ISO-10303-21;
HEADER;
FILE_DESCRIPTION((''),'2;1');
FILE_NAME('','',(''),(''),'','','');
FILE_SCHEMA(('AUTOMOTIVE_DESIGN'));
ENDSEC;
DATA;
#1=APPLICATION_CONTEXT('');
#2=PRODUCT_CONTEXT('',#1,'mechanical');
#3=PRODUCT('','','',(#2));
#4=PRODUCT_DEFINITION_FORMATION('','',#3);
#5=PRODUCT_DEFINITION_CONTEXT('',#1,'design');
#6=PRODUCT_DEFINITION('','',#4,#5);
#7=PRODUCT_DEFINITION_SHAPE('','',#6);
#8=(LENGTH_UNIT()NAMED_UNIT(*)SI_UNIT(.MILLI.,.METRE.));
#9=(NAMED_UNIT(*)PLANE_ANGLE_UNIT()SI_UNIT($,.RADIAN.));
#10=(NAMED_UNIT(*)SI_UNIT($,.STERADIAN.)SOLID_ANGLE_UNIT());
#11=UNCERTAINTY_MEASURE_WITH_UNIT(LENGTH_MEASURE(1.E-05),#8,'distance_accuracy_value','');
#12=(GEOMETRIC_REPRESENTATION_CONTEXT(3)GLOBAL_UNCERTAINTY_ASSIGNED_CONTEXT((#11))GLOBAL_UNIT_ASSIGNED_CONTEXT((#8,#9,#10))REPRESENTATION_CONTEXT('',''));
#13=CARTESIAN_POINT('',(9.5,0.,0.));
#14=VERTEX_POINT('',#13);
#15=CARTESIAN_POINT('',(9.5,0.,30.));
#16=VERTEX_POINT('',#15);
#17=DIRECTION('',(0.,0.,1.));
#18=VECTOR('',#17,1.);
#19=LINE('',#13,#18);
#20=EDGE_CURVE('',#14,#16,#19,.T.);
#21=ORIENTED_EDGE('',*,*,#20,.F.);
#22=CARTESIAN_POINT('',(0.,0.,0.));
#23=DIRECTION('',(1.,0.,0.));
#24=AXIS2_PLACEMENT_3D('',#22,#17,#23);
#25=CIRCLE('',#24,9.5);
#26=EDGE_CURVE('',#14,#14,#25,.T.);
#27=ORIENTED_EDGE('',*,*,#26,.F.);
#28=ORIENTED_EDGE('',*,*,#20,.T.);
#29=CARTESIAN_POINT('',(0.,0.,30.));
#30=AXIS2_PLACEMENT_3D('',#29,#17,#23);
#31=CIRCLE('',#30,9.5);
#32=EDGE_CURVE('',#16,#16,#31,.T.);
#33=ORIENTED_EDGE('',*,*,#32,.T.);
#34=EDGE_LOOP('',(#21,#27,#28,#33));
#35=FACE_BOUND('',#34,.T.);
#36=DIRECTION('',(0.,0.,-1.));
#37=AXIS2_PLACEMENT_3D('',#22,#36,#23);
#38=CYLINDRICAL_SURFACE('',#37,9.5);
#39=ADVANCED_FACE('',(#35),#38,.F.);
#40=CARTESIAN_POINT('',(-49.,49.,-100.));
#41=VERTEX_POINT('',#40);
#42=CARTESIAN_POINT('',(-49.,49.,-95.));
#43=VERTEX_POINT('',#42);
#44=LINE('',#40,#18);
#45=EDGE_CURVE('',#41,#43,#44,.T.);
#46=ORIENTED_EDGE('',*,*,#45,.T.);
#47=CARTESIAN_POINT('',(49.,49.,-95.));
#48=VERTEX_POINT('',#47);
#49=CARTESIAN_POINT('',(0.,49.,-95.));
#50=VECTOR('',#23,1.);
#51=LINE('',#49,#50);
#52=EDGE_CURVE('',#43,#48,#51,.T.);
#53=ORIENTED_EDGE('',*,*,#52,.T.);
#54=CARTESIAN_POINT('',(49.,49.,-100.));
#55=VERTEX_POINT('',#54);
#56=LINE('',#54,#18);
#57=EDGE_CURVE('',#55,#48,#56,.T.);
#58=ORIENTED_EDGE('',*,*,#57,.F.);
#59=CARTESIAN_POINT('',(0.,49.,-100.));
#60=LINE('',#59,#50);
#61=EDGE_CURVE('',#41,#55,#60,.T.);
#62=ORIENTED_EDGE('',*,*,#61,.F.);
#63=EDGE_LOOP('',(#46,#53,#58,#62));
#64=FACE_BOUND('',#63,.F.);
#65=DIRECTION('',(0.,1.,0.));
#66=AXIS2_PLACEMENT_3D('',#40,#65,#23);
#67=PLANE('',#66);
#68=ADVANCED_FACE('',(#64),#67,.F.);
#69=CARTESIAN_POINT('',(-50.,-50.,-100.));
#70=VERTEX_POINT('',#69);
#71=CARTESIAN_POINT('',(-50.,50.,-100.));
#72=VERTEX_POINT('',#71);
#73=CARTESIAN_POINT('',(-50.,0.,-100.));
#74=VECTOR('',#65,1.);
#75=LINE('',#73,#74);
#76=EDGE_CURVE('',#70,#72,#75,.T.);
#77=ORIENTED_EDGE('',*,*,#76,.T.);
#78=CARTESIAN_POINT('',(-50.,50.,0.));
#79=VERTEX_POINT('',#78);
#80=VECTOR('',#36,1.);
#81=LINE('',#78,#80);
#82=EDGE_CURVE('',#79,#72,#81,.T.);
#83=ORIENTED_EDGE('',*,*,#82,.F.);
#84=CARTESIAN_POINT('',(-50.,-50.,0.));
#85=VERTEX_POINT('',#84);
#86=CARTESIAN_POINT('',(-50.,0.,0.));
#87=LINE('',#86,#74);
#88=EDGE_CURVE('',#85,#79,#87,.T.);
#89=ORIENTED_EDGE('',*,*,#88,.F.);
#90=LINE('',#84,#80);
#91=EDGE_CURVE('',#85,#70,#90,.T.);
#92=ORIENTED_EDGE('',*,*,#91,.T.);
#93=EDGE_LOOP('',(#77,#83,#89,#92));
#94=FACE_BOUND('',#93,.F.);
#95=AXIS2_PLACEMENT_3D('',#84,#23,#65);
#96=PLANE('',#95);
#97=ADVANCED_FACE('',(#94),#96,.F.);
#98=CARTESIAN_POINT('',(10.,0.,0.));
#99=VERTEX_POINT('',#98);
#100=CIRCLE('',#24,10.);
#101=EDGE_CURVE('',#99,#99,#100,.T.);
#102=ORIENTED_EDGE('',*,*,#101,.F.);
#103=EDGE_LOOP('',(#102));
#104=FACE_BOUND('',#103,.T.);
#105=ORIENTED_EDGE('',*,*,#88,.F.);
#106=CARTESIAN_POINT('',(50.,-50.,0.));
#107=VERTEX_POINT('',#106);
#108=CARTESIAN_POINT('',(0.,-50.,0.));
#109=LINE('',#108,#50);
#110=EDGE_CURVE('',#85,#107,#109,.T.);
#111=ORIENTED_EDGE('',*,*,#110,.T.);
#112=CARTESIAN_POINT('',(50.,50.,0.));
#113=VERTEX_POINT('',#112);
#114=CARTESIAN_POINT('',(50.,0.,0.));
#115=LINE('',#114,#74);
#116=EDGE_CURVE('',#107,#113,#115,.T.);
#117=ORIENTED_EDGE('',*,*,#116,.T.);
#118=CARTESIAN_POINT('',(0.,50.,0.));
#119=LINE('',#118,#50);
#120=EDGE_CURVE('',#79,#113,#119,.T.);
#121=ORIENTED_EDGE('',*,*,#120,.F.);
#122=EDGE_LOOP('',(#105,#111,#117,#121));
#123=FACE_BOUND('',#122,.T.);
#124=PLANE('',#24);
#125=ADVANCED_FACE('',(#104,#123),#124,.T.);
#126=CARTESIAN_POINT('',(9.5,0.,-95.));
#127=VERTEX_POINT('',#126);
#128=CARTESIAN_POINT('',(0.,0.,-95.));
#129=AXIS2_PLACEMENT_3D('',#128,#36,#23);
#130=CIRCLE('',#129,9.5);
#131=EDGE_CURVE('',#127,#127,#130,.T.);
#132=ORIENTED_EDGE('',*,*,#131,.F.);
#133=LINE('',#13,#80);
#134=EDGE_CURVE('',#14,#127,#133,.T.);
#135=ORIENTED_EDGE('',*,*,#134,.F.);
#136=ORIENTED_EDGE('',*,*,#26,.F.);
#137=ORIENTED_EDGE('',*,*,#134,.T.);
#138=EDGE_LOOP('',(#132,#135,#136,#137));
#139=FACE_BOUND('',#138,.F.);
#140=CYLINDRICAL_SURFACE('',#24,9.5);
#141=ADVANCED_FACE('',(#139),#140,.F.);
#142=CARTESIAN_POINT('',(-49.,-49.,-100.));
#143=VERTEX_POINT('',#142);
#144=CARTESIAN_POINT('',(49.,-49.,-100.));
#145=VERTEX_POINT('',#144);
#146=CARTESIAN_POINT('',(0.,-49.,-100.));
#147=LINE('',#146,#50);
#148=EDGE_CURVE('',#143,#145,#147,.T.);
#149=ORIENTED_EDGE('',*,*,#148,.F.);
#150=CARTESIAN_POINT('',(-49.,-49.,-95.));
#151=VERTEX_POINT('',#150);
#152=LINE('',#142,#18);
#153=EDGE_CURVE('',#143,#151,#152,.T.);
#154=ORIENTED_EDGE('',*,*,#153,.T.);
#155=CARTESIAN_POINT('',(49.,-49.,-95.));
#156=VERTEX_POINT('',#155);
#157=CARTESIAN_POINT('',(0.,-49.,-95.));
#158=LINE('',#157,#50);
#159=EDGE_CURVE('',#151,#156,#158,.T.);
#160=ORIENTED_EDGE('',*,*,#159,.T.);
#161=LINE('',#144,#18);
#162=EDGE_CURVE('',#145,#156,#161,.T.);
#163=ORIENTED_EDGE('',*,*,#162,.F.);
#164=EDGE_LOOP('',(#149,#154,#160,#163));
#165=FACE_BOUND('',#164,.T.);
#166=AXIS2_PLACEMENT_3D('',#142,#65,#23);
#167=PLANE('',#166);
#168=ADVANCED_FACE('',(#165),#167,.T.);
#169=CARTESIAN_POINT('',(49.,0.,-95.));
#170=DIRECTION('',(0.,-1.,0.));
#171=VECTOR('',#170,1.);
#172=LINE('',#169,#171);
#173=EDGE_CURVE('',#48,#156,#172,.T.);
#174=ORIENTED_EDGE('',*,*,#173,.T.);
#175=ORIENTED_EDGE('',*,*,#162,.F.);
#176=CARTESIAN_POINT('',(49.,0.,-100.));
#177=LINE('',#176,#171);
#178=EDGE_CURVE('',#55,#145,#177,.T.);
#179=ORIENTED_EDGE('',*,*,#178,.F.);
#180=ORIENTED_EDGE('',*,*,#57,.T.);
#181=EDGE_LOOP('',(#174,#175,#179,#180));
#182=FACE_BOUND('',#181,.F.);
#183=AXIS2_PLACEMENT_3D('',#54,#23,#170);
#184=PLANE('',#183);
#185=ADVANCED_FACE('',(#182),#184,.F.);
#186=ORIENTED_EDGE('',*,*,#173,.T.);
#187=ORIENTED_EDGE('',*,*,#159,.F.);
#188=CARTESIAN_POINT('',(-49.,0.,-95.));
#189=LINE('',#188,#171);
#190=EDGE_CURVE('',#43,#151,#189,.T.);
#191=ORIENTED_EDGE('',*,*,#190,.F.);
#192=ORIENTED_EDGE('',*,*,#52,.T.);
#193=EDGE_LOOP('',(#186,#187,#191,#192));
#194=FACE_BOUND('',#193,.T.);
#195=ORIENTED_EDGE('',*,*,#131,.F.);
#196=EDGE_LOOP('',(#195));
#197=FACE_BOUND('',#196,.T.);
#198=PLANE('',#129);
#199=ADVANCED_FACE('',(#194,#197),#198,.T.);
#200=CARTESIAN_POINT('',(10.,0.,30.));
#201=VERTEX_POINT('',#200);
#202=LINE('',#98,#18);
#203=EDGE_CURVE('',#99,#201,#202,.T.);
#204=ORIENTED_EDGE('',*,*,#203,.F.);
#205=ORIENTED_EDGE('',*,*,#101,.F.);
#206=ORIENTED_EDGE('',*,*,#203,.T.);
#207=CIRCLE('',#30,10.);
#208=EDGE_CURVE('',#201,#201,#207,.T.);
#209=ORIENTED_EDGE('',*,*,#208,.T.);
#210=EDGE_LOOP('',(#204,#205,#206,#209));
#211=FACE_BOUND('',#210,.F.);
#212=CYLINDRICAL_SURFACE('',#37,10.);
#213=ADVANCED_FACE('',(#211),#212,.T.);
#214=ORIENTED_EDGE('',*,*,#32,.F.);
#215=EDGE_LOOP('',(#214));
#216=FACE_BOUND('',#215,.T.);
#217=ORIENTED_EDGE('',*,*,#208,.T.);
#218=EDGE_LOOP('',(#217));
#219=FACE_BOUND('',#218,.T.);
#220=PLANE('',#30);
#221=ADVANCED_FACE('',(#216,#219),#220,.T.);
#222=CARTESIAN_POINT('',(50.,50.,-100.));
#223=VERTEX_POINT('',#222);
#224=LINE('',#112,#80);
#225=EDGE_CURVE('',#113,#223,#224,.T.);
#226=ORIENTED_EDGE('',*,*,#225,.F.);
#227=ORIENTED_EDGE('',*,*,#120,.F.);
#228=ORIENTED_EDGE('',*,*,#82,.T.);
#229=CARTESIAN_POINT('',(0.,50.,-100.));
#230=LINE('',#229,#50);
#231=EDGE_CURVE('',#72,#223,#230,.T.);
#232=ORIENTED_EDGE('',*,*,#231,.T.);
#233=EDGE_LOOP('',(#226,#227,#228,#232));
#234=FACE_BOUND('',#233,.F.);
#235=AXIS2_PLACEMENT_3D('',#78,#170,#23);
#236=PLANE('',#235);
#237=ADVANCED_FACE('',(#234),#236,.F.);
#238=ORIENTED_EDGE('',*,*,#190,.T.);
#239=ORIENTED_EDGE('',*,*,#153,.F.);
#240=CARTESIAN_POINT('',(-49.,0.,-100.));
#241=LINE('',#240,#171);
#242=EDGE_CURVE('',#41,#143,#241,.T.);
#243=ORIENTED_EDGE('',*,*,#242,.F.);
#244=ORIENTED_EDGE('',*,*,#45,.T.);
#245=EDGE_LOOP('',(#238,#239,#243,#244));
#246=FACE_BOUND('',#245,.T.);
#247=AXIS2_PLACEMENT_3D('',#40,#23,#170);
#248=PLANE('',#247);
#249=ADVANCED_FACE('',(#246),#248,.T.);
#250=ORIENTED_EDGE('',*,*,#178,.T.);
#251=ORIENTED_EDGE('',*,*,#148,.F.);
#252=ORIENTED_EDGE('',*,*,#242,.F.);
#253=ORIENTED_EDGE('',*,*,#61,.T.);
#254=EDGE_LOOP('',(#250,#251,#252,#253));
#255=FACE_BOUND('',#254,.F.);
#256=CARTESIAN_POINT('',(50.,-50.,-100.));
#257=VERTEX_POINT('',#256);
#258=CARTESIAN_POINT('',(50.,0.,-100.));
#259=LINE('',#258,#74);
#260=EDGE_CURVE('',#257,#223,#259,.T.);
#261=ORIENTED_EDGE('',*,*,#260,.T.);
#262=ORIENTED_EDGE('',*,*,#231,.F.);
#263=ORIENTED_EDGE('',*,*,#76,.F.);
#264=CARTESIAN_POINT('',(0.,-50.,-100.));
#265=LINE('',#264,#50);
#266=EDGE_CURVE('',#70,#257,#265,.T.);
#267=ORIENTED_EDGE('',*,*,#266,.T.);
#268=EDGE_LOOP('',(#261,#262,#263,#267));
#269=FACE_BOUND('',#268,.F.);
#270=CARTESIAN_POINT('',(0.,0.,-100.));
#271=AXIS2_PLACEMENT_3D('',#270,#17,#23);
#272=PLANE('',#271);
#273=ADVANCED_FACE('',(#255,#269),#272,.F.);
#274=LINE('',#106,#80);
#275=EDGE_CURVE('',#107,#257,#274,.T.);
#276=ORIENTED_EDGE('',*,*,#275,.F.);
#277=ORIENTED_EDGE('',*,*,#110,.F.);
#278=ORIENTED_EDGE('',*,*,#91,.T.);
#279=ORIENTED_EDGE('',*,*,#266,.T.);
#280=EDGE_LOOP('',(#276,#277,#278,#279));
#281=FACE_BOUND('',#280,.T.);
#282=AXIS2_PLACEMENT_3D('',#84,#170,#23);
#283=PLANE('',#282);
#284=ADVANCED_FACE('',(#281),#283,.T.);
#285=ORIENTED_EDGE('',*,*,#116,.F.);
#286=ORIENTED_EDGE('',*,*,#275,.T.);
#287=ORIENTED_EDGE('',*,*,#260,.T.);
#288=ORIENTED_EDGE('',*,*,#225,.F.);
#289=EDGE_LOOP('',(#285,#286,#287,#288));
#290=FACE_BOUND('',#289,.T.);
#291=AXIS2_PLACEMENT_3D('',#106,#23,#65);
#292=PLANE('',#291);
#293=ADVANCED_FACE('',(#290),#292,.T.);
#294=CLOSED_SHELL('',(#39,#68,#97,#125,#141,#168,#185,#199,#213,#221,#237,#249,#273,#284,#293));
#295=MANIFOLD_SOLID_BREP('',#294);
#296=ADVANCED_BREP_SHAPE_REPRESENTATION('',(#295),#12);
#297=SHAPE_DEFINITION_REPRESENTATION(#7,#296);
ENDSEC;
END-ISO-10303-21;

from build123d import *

# Parameters (mm, degrees)
F0_W     = 100
F0_H     = 100
F1_DEPTH = 100
F2_R     = 10
F2_R_2   = 9.5
F3_DEPTH = 30
F4_DEPTH = 100
F5_W     = 98
F5_H     = 98
F5_R     = 9.5
F6_DEPTH = 5


with BuildPart() as f1:
    # F0 (on Top) → F1 (new body)
    with BuildSketch(Plane.XY):
        Rectangle(F0_W, F0_H)
    extrude(amount=-F1_DEPTH)

    # F2 (on Top) → F3 (join)
    with BuildSketch(Plane.XY):
        Circle(F2_R)
        Circle(F2_R_2, mode=Mode.SUBTRACT)
    extrude(amount=F3_DEPTH)

    # F4 (cut, through all): a face of the model
    f4_faces = [f1.faces().sort_by_distance(p)[0] for p in [
        (0, 0, 0),
    ]]
    extrude(f4_faces, amount=-F4_DEPTH, mode=Mode.SUBTRACT)

    # F5 (on face) → F6 (cut)
    with BuildSketch(Plane(origin=(0, 0, -100), x_dir=(1, 0, 0), z_dir=(0, 0, -1))):
        Rectangle(F5_W, F5_H)
        Circle(F5_R, mode=Mode.SUBTRACT)
    extrude(amount=-F6_DEPTH, mode=Mode.SUBTRACT)


solid = f1.part
